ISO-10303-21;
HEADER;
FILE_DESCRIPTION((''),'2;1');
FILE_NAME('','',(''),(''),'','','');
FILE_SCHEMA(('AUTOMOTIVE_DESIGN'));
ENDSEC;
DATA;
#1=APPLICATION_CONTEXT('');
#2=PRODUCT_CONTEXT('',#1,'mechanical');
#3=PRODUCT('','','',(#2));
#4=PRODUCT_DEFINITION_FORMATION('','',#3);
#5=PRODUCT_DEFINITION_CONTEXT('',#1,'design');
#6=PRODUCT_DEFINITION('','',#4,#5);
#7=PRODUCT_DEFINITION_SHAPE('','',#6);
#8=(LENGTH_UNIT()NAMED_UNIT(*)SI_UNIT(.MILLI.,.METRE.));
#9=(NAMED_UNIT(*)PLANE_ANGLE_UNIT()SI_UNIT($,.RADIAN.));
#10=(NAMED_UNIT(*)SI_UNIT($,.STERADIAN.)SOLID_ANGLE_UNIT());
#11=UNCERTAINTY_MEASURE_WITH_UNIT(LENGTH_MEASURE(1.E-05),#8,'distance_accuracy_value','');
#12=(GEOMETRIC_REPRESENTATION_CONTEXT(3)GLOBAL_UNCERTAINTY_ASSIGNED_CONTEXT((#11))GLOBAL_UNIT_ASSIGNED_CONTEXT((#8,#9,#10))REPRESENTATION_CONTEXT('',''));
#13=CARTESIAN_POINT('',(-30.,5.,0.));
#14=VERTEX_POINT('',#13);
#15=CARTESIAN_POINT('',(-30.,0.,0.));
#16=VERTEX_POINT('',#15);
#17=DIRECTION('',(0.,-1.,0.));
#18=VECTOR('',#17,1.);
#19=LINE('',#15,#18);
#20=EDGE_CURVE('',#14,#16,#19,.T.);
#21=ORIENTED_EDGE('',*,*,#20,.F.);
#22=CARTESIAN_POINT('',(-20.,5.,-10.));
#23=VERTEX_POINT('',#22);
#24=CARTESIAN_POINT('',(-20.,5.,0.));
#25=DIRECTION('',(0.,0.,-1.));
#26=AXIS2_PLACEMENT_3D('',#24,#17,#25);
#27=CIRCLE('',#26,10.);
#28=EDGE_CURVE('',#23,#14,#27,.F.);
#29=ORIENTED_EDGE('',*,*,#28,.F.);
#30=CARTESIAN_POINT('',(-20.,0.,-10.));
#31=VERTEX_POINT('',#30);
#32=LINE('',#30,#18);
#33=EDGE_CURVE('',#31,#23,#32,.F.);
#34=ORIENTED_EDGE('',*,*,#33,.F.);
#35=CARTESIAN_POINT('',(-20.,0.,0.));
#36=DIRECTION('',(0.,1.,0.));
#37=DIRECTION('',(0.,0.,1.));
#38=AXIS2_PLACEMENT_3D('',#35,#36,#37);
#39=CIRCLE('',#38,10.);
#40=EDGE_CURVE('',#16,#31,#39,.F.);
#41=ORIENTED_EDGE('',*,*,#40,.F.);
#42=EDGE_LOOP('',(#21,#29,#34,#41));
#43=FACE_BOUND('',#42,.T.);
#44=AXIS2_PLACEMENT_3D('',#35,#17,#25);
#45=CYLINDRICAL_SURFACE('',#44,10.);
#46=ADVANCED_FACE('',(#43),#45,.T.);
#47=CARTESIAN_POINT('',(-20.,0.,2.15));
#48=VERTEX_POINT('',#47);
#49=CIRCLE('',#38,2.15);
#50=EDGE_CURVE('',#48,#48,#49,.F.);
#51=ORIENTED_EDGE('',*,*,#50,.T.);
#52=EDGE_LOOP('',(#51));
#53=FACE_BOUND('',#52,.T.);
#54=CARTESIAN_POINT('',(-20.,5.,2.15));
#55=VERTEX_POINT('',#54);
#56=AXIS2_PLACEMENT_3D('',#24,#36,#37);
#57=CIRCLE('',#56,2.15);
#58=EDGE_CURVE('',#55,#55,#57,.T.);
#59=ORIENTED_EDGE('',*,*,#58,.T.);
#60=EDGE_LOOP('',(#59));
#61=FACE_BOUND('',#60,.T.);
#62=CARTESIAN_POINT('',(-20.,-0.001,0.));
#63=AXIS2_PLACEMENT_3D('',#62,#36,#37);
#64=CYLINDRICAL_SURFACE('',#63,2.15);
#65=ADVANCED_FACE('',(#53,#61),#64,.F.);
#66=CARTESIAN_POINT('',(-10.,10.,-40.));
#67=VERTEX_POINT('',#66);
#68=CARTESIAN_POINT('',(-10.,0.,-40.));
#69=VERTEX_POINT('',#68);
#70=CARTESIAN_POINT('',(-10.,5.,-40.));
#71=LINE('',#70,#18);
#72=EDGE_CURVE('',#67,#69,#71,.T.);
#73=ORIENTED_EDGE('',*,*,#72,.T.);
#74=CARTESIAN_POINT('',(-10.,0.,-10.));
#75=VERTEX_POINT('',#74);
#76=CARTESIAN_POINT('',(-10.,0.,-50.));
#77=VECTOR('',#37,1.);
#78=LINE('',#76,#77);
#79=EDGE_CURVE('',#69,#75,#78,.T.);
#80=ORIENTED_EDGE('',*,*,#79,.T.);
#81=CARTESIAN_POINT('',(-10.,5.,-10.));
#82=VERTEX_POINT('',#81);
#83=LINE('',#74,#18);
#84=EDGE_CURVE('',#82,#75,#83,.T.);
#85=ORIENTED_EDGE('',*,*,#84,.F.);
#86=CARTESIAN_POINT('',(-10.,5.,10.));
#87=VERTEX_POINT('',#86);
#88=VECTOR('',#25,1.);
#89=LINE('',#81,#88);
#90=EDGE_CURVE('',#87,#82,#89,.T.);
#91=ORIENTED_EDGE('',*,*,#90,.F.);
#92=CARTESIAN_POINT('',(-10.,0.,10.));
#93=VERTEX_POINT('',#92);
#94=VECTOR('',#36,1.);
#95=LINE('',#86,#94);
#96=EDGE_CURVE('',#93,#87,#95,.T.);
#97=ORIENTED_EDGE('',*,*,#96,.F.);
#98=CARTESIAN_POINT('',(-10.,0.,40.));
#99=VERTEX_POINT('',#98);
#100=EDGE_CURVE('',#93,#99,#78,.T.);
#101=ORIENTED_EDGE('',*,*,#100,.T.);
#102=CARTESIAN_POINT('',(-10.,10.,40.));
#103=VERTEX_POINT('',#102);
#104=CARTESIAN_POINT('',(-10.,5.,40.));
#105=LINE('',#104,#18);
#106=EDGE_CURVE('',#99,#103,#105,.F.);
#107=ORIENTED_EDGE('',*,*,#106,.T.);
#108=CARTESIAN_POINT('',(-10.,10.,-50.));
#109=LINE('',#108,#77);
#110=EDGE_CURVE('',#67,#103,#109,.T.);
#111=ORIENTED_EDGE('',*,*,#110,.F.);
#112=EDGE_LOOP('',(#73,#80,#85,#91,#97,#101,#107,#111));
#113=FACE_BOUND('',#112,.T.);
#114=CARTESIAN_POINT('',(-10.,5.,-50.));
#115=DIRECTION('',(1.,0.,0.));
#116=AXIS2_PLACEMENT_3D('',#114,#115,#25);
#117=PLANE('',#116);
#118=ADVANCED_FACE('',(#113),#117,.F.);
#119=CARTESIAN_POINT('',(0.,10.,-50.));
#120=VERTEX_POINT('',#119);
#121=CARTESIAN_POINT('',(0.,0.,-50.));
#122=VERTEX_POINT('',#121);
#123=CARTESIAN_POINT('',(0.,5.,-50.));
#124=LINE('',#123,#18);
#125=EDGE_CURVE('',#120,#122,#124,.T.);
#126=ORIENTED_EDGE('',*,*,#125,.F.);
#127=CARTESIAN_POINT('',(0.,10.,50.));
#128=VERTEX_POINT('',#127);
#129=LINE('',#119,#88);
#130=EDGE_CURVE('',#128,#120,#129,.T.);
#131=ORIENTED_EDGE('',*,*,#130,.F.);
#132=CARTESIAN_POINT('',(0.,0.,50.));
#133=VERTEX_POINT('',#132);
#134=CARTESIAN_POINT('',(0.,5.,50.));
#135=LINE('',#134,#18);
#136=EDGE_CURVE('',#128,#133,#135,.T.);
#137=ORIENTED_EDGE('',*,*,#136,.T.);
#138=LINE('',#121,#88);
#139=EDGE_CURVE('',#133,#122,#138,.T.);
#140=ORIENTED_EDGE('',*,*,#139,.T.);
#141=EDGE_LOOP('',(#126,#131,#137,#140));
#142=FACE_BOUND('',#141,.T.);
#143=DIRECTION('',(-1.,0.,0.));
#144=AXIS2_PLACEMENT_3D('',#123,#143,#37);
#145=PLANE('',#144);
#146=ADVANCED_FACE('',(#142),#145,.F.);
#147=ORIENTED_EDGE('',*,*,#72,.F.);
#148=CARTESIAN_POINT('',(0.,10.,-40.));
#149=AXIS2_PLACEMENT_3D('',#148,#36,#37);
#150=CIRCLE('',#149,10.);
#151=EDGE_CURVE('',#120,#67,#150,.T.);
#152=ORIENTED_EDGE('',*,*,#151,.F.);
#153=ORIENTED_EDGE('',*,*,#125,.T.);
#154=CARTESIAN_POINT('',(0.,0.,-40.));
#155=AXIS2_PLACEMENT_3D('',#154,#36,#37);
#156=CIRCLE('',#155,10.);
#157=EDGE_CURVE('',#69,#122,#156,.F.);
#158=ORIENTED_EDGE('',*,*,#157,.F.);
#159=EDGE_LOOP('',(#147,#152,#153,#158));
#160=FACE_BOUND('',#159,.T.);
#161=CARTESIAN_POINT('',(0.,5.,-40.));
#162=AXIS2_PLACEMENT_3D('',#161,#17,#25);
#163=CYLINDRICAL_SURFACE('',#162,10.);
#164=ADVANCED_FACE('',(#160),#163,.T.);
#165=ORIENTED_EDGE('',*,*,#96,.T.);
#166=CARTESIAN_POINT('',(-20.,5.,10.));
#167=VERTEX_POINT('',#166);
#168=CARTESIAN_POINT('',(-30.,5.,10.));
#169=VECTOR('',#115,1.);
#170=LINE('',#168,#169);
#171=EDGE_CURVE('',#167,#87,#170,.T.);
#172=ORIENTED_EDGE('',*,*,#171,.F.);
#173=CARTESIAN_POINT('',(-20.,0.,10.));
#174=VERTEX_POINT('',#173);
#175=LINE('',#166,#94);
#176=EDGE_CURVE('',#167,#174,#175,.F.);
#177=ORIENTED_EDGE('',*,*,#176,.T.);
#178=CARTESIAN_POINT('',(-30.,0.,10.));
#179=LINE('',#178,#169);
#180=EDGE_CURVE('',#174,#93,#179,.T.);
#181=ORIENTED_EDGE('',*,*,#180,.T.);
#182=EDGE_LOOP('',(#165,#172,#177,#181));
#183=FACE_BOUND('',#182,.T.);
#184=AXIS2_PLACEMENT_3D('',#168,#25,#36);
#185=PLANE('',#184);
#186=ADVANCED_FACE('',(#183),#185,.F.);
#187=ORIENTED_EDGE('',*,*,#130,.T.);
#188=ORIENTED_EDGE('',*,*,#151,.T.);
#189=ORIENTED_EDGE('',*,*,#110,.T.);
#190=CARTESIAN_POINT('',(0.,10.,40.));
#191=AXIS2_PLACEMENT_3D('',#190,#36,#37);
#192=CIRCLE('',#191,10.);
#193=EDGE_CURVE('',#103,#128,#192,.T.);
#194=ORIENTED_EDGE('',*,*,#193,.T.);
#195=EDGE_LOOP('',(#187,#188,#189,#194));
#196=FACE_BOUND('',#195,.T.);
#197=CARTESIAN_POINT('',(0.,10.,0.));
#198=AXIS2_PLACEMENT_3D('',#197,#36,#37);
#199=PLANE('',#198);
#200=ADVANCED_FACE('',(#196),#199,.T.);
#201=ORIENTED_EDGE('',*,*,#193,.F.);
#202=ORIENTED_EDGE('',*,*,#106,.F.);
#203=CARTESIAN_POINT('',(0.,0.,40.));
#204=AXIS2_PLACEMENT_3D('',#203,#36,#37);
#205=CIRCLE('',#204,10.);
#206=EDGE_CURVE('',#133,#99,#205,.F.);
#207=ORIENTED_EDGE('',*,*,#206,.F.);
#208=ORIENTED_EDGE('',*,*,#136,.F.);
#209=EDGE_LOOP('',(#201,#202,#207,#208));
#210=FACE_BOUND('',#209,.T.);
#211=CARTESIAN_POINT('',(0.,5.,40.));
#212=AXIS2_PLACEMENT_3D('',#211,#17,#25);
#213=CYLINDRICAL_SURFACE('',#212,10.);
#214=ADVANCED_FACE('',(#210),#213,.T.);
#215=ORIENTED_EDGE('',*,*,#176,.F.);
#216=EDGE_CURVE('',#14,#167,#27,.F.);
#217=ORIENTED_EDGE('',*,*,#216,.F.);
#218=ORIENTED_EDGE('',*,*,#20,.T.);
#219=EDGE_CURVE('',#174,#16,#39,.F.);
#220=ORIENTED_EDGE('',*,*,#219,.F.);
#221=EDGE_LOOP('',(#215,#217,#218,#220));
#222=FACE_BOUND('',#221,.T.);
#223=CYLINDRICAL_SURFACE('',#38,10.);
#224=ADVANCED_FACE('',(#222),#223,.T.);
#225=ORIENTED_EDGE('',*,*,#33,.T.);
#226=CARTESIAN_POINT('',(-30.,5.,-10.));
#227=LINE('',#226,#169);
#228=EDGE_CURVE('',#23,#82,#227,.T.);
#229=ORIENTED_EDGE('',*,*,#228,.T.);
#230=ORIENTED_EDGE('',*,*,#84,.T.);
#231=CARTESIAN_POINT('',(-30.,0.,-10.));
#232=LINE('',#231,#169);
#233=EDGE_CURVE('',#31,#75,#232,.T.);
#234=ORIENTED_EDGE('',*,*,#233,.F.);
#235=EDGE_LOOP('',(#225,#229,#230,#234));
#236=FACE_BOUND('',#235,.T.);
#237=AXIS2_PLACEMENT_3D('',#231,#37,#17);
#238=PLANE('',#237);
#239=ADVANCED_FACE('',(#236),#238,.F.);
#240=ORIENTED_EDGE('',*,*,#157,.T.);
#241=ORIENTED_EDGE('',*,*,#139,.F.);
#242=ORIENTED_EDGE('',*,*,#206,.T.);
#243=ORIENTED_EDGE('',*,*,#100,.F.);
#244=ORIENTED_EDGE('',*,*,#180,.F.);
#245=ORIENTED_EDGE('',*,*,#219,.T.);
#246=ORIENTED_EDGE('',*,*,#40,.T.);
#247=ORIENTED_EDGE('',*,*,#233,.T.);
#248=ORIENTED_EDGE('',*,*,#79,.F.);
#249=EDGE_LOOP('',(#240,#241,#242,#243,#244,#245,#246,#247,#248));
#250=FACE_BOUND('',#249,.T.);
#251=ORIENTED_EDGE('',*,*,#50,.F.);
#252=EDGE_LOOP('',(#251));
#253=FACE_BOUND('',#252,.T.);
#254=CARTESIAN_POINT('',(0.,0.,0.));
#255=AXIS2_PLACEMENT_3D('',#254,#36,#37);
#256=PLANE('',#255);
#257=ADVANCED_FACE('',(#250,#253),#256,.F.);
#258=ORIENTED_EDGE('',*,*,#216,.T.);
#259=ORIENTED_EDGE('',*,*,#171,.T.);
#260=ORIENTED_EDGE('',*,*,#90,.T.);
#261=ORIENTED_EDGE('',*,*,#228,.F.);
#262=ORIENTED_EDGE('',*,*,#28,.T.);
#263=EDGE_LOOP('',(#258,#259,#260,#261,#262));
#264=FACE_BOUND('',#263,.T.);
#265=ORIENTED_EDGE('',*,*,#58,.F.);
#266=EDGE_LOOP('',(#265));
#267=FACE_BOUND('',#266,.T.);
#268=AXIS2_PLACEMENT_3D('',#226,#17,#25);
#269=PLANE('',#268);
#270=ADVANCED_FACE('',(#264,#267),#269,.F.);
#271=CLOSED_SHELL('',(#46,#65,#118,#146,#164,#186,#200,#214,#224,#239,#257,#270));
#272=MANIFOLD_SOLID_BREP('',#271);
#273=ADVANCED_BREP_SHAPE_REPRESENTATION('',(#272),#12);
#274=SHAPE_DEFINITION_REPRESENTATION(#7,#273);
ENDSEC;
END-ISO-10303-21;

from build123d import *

# Parameters (mm, degrees)
SKETCH1_W           = 10
SKETCH1_H           = 100
BOSS_EXTRUDE1_DEPTH = 5
SKETCH2_W           = 10
SKETCH2_H           = 100
BOSS_EXTRUDE2_DEPTH = 5
SKETCH3_W           = 20
SKETCH3_H           = 5
BOSS_EXTRUDE3_DEPTH = 20
FILLET1_R           = 10
CUT_EXTRUDE1_REACH  = 60.523
SKETCH4_R           = 2.15
FILLET2_R           = 10


with BuildPart() as part:
    # Sketch1 → Boss-Extrude1 (new body)
    with BuildSketch(Plane(origin=(0, 0, 0), x_dir=(1, 0, 0), z_dir=(0, 1, 0))):
        with Locations((-5, 0)):
            Rectangle(SKETCH1_W, SKETCH1_H)
    extrude(amount=BOSS_EXTRUDE1_DEPTH)

    # Sketch2 → Boss-Extrude2 (add)
    with BuildSketch(Plane(origin=(0, 5, 0), x_dir=(1, 0, 0), z_dir=(0, 1, 0))):
        with Locations((-5, 0)):
            Rectangle(SKETCH2_W, SKETCH2_H)
    extrude(amount=BOSS_EXTRUDE2_DEPTH)

    # Sketch3 → Boss-Extrude3 (add)
    with BuildSketch(Plane.ZY.offset(10)):
        with Locations((0, 2.5)):
            Rectangle(SKETCH3_W, SKETCH3_H)
    extrude(amount=BOSS_EXTRUDE3_DEPTH)

    # Fillet1
    fillet1_edges = [part.edges().sort_by_distance(p)[0] for p in [
        (-30, 2.5, 10),
        (-30, 2.5, -10),
    ]]
    fillet(fillet1_edges, radius=FILLET1_R - 0.0001)  # a hair under: the kernel refuses the full size

    # Sketch4 → Cut-Extrude1 (cut, up to next)
    with BuildSketch(Plane(origin=(0, 5, 0), x_dir=(1, 0, 0), z_dir=(0, 1, 0)), mode=Mode.PRIVATE) as cut_extrude1_sk1:
        with Locations(Location((-20, 0, 0), (0, 0, 270))):
            Circle(SKETCH4_R)
    cut_extrude1_tool1 = extrude(cut_extrude1_sk1.sketch, amount=-CUT_EXTRUDE1_REACH, mode=Mode.PRIVATE) & part.part
    add(cut_extrude1_tool1.solids().sort_by_distance((-20, 5, 0))[0], mode=Mode.SUBTRACT)

    # Fillet2
    fillet2_edges = [part.edges().sort_by_distance(p)[0] for p in [
        (-10, 5, -50),
        (-10, 5, 50),
    ]]
    fillet(fillet2_edges, radius=FILLET2_R - 0.0001)  # a hair under: the kernel refuses the full size


solid = part.part
